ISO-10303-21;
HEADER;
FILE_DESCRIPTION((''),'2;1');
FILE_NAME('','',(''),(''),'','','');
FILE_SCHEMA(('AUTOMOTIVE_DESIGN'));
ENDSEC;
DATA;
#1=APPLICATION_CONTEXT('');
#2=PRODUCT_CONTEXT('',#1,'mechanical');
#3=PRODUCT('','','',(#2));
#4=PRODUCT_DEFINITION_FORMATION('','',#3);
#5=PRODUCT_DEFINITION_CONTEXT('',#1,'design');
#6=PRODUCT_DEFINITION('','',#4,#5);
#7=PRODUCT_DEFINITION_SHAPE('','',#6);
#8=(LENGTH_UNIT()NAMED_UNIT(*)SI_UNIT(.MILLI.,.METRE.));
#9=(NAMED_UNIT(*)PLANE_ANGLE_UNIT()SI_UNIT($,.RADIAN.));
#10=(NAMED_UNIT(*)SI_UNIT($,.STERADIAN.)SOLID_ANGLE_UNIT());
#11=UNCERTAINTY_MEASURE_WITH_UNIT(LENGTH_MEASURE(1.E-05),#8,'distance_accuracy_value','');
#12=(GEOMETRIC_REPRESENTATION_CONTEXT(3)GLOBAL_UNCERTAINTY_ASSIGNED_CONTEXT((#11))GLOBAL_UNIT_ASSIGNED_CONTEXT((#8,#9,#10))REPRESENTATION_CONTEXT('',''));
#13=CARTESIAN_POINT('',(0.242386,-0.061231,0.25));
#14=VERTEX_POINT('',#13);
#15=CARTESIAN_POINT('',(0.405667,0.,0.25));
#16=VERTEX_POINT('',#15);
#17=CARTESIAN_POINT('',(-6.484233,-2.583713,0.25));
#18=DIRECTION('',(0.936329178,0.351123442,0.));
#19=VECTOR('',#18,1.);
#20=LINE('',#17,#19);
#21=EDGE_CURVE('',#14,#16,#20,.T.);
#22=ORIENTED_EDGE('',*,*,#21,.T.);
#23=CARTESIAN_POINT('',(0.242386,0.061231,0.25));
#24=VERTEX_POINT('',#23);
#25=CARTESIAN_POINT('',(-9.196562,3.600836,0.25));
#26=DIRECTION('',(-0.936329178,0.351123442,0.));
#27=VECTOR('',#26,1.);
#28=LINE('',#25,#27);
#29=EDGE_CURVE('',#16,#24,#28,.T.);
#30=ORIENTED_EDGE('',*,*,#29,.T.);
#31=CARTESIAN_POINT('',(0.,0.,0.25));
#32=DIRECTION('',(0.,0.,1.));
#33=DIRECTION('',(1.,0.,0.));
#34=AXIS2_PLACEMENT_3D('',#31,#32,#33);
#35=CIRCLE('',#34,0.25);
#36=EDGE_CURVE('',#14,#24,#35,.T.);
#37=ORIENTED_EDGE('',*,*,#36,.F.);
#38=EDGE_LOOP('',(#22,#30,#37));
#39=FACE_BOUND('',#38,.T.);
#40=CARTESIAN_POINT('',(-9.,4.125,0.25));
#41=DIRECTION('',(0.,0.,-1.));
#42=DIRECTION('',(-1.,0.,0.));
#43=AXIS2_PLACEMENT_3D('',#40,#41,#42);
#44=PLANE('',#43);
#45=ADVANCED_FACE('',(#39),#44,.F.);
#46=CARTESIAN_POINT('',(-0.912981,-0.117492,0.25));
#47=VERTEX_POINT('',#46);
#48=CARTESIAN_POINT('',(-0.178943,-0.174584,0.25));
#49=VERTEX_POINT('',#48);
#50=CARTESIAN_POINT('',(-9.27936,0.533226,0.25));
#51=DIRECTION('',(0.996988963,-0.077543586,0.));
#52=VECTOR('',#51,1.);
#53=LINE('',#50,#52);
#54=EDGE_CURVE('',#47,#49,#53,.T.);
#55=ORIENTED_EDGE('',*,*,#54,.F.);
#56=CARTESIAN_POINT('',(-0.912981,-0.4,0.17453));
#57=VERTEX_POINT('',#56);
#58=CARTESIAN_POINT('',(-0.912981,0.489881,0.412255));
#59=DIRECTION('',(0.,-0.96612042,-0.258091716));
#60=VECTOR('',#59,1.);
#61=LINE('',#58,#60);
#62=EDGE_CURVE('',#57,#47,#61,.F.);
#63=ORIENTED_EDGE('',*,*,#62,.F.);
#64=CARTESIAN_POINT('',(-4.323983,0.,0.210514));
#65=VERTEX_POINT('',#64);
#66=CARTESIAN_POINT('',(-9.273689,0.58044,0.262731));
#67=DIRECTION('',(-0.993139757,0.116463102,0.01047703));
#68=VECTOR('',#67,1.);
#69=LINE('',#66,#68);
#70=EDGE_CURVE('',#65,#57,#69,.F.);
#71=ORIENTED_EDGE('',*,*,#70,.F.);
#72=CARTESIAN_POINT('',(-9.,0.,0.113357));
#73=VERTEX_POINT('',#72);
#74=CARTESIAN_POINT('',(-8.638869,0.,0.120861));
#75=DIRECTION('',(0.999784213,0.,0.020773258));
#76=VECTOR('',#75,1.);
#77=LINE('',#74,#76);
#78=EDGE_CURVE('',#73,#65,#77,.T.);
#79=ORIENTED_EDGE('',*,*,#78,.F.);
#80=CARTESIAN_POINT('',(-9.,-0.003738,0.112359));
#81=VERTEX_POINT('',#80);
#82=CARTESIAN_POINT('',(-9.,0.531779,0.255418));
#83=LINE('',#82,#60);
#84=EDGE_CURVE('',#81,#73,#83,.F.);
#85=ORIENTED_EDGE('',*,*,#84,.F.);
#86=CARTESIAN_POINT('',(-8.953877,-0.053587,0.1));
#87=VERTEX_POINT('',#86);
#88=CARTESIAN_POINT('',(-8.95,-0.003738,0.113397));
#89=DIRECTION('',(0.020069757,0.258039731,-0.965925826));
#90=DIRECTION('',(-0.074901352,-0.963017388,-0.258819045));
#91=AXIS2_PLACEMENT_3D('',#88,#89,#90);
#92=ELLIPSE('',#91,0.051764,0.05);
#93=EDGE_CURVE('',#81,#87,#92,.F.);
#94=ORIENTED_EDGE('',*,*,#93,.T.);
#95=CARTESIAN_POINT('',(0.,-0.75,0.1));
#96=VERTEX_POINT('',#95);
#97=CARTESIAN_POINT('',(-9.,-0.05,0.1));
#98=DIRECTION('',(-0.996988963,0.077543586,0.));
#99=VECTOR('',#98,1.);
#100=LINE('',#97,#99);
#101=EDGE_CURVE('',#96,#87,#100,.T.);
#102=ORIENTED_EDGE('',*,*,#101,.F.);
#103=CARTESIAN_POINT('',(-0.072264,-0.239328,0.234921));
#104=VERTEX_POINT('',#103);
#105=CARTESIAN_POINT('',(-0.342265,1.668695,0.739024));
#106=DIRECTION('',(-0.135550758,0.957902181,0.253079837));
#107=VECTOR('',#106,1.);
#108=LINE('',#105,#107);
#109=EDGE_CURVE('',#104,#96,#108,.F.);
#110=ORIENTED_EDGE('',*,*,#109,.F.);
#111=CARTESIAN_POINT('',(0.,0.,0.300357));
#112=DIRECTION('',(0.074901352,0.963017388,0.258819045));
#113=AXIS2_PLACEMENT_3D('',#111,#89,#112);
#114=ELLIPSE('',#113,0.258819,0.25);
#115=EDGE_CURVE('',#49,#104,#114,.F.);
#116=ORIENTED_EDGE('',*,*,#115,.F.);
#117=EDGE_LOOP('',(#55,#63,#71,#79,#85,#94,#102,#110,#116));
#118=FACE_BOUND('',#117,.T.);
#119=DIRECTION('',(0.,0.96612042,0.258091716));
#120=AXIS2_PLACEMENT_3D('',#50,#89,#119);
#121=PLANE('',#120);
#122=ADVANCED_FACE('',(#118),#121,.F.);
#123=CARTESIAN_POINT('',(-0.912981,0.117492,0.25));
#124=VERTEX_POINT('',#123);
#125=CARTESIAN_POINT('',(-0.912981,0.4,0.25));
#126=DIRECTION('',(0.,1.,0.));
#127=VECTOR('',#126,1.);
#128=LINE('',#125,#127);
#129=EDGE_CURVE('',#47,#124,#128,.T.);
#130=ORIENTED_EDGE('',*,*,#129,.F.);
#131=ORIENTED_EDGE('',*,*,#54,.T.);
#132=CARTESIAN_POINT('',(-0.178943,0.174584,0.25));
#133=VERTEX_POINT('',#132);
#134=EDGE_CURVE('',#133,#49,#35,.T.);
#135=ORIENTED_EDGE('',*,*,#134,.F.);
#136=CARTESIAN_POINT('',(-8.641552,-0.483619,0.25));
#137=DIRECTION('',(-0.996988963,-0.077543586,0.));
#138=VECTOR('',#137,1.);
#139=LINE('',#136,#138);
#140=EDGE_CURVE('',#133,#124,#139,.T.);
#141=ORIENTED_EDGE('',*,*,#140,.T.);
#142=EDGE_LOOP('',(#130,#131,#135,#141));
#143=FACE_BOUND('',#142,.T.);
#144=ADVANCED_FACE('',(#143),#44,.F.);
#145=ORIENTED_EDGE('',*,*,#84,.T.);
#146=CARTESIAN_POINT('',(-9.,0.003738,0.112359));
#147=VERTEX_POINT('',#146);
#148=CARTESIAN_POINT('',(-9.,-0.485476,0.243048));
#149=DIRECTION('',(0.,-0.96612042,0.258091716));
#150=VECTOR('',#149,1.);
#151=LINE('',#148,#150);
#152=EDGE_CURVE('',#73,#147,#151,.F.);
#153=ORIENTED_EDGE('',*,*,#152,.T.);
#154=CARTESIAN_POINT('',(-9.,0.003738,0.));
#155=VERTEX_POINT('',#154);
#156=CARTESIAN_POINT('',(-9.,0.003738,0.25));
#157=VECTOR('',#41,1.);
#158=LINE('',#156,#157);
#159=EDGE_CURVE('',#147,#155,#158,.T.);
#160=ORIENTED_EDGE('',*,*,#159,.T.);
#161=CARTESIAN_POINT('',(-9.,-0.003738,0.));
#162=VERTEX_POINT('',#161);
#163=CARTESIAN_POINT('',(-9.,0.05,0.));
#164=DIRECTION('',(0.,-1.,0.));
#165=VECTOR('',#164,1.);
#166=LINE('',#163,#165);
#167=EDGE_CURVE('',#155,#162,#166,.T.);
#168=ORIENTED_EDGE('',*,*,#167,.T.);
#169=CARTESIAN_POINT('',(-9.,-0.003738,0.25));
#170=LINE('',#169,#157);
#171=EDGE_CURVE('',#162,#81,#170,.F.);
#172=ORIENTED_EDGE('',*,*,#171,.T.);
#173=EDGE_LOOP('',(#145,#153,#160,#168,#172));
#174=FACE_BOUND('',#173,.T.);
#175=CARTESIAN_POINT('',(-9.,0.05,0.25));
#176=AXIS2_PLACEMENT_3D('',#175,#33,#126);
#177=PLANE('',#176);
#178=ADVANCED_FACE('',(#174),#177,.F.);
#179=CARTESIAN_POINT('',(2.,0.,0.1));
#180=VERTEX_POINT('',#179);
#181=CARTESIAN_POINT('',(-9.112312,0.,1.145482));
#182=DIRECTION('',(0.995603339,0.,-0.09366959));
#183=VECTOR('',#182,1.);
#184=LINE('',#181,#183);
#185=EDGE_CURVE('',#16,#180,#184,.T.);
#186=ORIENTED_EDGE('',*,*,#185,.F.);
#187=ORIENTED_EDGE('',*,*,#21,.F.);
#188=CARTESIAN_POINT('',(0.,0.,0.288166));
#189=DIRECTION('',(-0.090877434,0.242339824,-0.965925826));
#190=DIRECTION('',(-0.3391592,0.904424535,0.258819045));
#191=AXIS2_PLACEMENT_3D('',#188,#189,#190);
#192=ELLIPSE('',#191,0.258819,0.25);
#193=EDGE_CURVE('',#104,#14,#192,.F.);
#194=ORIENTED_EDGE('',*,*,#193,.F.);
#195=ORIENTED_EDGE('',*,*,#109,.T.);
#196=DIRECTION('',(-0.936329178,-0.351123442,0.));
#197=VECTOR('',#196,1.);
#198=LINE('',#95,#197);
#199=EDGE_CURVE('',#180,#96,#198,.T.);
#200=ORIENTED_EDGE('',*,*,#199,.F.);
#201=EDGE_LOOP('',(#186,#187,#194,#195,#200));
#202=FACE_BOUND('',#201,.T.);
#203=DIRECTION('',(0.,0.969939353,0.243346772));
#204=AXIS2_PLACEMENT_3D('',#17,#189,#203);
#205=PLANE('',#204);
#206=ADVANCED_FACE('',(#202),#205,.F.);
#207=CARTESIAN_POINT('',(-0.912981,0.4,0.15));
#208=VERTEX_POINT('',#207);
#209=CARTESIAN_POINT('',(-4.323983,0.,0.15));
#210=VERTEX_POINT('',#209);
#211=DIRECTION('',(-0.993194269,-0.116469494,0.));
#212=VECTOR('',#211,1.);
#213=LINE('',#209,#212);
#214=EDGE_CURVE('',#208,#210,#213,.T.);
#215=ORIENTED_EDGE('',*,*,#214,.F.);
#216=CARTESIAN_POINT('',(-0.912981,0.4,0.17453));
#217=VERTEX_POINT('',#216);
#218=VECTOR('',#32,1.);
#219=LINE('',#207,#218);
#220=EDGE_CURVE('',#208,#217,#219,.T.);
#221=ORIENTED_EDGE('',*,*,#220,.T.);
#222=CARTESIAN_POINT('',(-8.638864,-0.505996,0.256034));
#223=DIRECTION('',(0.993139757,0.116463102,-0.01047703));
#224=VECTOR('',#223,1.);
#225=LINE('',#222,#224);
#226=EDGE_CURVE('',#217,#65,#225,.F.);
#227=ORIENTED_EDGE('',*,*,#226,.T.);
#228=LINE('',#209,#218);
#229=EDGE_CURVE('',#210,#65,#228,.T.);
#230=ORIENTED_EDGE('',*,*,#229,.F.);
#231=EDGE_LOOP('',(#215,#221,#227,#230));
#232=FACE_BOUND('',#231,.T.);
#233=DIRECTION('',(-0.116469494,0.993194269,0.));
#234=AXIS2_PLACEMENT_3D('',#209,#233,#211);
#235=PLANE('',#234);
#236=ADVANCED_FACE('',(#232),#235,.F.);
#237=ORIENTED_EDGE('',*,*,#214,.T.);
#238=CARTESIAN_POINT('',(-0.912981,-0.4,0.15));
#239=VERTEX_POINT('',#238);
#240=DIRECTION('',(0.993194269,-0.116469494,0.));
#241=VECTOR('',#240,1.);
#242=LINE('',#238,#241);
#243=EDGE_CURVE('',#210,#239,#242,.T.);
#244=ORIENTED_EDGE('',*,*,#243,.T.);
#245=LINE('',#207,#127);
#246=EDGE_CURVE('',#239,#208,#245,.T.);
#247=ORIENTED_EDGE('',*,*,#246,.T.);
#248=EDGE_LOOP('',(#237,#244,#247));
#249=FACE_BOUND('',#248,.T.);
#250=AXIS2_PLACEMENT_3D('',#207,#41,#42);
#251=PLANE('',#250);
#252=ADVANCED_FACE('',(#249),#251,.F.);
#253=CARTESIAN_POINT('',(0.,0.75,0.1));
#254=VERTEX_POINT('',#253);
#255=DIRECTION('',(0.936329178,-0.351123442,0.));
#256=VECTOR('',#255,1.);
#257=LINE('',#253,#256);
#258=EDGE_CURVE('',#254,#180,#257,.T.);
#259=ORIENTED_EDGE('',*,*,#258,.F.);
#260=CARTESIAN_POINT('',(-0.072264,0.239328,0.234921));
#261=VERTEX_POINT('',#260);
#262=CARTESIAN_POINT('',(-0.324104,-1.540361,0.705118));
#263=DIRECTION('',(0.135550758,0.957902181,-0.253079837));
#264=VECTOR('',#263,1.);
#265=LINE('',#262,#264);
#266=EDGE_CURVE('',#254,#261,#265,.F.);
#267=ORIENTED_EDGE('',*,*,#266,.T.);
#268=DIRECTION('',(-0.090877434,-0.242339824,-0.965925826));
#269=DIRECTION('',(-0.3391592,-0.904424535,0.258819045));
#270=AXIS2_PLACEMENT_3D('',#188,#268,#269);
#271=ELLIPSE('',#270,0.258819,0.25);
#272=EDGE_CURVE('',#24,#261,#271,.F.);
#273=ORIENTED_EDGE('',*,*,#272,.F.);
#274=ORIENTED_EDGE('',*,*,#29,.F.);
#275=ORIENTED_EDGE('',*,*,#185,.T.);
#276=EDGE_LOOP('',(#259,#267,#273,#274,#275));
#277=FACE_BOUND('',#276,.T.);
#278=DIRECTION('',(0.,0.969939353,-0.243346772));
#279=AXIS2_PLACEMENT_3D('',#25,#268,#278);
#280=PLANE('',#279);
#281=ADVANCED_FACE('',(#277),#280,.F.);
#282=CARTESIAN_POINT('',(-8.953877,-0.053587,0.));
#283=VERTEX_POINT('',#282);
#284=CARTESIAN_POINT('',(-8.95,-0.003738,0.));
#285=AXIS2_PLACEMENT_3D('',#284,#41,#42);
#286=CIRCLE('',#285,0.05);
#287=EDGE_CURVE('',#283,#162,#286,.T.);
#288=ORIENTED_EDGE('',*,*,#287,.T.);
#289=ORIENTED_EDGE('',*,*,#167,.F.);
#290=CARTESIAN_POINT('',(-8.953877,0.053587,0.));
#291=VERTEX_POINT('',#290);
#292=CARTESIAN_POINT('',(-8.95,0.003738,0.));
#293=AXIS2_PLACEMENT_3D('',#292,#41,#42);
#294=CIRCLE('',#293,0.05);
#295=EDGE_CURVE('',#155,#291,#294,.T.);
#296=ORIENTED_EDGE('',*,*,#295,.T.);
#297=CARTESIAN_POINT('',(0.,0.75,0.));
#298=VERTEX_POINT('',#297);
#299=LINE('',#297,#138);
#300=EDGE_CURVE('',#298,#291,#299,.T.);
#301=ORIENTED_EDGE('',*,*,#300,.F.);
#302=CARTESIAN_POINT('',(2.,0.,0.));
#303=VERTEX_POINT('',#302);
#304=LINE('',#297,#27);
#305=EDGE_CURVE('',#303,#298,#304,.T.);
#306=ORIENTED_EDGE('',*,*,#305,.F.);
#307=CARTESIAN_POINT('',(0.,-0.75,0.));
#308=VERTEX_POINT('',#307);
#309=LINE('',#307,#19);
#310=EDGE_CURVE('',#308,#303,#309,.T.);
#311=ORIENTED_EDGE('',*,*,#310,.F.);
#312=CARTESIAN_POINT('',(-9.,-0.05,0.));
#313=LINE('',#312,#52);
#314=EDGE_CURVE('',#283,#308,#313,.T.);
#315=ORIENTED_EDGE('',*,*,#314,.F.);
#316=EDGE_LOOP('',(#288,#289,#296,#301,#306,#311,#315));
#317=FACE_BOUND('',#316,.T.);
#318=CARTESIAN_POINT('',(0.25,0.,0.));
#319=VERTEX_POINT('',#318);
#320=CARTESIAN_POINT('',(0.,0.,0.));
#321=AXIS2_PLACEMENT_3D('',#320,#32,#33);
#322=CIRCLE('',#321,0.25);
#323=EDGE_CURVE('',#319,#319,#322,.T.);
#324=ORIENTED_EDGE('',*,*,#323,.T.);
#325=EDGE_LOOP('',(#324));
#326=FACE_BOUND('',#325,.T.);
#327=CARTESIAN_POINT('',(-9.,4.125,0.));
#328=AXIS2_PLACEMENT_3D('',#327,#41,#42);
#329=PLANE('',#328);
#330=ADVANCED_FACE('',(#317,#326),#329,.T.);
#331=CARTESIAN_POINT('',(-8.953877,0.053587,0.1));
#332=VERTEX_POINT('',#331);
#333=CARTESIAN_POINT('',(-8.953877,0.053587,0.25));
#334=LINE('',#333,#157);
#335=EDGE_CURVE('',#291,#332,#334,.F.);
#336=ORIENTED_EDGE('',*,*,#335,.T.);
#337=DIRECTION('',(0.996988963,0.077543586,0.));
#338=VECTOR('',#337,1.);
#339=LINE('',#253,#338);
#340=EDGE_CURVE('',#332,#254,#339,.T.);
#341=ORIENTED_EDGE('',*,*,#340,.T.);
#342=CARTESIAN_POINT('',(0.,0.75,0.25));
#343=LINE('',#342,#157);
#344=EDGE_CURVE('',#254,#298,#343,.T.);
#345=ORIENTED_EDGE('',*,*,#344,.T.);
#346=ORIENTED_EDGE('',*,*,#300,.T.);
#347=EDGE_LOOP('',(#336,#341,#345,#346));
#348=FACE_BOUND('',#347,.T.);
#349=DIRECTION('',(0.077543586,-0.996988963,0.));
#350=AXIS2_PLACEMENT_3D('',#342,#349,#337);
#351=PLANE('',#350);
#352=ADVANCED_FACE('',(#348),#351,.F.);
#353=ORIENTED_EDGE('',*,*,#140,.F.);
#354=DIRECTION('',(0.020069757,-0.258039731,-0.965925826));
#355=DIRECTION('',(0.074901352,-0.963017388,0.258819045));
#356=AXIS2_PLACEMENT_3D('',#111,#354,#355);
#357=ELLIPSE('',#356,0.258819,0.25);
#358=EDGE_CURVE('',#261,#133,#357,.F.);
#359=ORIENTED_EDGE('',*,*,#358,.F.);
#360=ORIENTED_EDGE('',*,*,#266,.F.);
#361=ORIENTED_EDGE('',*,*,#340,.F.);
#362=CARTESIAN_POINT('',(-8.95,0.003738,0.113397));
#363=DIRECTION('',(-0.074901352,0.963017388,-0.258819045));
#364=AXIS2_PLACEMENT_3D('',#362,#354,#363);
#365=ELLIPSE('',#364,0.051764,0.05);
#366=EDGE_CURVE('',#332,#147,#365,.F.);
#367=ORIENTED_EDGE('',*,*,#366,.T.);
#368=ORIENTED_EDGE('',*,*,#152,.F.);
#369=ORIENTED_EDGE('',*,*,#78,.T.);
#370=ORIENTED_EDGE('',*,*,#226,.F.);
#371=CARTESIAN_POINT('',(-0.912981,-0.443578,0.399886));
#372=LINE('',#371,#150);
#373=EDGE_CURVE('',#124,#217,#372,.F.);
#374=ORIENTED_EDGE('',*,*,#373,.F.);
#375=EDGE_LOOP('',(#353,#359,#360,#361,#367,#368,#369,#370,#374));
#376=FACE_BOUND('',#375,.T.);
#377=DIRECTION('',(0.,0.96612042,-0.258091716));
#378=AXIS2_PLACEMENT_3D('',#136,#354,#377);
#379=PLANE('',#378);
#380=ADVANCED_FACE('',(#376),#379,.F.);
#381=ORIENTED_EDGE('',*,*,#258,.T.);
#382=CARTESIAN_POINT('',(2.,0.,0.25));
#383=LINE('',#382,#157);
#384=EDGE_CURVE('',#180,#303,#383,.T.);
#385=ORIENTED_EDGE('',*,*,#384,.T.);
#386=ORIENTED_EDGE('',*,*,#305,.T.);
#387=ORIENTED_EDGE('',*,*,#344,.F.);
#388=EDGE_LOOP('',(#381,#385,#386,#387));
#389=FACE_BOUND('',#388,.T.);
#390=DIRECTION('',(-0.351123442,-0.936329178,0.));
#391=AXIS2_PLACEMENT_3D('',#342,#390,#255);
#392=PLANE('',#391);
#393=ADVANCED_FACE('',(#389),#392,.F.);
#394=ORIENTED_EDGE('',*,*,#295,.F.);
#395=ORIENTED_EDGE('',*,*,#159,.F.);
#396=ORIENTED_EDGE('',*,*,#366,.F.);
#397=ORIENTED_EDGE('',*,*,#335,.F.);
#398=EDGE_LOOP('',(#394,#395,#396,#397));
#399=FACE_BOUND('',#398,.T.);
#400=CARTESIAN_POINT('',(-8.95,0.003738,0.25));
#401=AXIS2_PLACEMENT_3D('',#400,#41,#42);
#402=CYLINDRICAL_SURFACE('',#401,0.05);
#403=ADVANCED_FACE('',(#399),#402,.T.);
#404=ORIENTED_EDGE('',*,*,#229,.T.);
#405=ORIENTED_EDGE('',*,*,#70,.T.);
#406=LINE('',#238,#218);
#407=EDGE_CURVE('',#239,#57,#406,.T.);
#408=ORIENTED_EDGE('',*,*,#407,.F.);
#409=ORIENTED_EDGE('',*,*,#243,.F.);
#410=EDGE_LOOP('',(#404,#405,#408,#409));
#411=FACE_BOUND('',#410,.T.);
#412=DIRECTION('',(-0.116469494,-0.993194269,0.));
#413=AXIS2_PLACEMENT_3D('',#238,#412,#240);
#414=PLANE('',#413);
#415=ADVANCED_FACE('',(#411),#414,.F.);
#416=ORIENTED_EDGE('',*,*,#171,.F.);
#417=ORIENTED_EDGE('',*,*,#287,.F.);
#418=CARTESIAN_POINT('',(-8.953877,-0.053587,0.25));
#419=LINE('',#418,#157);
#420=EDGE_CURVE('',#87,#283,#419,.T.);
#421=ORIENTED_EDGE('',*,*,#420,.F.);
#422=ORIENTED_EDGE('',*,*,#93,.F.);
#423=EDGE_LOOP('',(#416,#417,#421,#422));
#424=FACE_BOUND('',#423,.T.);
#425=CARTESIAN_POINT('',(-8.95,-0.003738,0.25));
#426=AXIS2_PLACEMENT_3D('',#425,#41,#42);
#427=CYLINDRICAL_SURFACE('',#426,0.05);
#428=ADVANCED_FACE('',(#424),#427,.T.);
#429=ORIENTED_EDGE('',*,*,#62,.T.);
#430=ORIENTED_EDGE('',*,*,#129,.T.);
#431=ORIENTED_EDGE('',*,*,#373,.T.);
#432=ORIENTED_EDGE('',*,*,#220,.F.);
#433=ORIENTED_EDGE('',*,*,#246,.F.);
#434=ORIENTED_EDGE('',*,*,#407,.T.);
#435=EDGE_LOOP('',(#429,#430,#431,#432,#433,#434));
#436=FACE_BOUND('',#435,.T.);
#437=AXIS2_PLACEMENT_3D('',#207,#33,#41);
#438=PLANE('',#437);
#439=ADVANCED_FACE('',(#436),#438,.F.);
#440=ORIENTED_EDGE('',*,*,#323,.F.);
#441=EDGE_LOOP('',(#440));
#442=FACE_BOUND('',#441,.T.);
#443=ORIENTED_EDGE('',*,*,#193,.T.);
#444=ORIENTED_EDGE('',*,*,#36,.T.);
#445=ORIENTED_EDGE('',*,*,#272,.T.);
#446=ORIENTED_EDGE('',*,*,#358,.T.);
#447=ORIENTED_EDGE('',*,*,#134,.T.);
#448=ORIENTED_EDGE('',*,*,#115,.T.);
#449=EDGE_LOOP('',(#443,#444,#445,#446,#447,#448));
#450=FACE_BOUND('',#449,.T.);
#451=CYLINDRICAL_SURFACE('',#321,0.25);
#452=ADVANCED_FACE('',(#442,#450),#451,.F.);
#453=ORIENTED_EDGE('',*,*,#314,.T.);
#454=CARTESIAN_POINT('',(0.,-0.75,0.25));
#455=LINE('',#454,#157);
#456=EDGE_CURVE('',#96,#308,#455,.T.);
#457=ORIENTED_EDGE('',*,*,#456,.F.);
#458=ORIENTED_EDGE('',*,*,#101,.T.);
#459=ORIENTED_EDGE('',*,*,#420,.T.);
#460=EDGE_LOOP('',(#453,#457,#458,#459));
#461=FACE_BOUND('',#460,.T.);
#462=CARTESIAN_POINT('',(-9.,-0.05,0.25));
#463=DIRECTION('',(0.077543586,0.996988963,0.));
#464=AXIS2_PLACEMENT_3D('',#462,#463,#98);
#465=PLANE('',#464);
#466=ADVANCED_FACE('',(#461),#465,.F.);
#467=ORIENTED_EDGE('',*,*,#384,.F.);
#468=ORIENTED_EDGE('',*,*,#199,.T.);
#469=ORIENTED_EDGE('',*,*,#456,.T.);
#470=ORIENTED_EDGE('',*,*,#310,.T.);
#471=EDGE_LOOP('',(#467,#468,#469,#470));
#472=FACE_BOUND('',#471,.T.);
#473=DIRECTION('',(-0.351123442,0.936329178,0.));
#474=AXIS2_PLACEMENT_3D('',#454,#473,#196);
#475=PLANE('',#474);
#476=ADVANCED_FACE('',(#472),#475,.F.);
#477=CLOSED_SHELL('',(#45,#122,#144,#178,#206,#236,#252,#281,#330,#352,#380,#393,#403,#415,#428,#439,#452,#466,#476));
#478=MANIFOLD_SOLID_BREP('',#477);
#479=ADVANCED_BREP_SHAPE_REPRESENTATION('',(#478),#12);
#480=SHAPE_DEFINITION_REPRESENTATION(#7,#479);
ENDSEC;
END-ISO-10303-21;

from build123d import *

# Parameters (mm, degrees)
BOSS_EXTRUDE1_DEPTH = 0.25
SKETCH2_R           = 0.25
CUT_EXTRUDE1_DEPTH  = 0.25
CHAMFER1_SIZE       = 0.15
CHAMFER1_SIZE_2     = 0.559807621
FILLET1_R           = 0.05
CUT_EXTRUDE2_DEPTH  = 0.1


with BuildPart() as part:
    # Sketch1 → Boss-Extrude1 (new body)
    with BuildSketch(Plane.XY):
        Polygon((0, 0.75), (-9, 0.05), (-9, -0.05), (0, -0.75), (2, 0), align=None)
    extrude(amount=BOSS_EXTRUDE1_DEPTH)

    # Sketch2 → Cut-Extrude1 (cut)
    with BuildSketch(Plane.XY.offset(0.25)):
        Circle(SKETCH2_R)
    extrude(amount=-CUT_EXTRUDE1_DEPTH, mode=Mode.SUBTRACT)

    # Chamfer1
    # the kernel refuses this chamfer: 0.559807621, 0.15 mm, written as the material it takes off along each edge
    with BuildSketch(Plane(origin=(3.361108509, -0.510415691, 0.25), x_dir=(0.04828384365935674, 0.12875691642495132, -0.9905000388259542), z_dir=(-0.9363291775690445, 0.3511234415883917, 0))) as chamfer1_piece_1:
        Polygon((CHAMFER1_SIZE * 0.990500038826, CHAMFER1_SIZE * 0.137512447021), (-CHAMFER1_SIZE_2 * 0.137512447055, CHAMFER1_SIZE_2 * 0.990500039065), (0, 0), align=None)
    extrude(amount=5.043329986, mode=Mode.SUBTRACT)
    with BuildSketch(Plane(origin=(1.449287487, 0.86272236, 0.25), x_dir=(-0.010663208262792517, 0.13709839195018952, -0.990500038825954), z_dir=(-0.9969889629624744, -0.07754358600819244, 0))) as chamfer1_piece_2:
        Polygon((CHAMFER1_SIZE * 0.990500038826, CHAMFER1_SIZE * 0.137512447021), (-CHAMFER1_SIZE_2 * 0.137512447055, CHAMFER1_SIZE_2 * 0.990500039065), (0, 0), align=None)
    extrude(amount=11.934510227, mode=Mode.SUBTRACT)

    # Chamfer2
    # the kernel refuses this chamfer: 0.559807621, 0.15 mm, written as the material it takes off along each edge
    with BuildSketch(Plane(origin=(-3.266660422, -1.974997658, 0.25), x_dir=(0.04828384365935697, -0.12875691642495193, -0.9905000388259542), z_dir=(0.9363291775690445, 0.3511234415883917, 0))) as chamfer2_piece_1:
        with BuildLine():
            Line((0.157289802, 0), (-0.085695312, 0.575116338))
            Line((-0.085695312, 0.575116338), (-0.096785101, 0.573576727))
            ThreePointArc((-0.096785101, 0.573576727), (-0.051067197, 0.286417039), (-0.011089789, -0.00153961))
            Line((-0.011089789, -0.00153961), (0.00153961, -0.011089789))
            ThreePointArc((0.00153961, -0.011089789), (0.078697362, -0.000377875), (0.158829412, -0.011089789))
            Line((0.158829412, -0.011089789), (0.157289802, 0))
        make_face()
    extrude(amount=8.262216566, mode=Mode.SUBTRACT)
    with BuildSketch(Plane(origin=(-9.511515098, -0.010215492, 0.25), x_dir=(-0.010663208262792486, -0.13709839195018902, -0.9905000388259542), z_dir=(0.9969889629624744, -0.0775435860081925, 0))) as chamfer2_piece_2:
        with BuildLine():
            Line((0.157289802, 0), (-0.085695312, 0.575116338))
            Line((-0.085695312, 0.575116338), (-0.096785101, 0.573576727))
            ThreePointArc((-0.096785101, 0.573576727), (-0.051067197, 0.286417039), (-0.011089789, -0.00153961))
            Line((-0.011089789, -0.00153961), (0.00153961, -0.011089789))
            ThreePointArc((0.00153961, -0.011089789), (0.078697362, -0.000377875), (0.158829412, -0.011089789))
            Line((0.158829412, -0.011089789), (0.157289802, 0))
        make_face()
    extrude(amount=13.029035977, mode=Mode.SUBTRACT)

    # Fillet1
    fillet1_edges = [part.edges().sort_by_distance(p)[0] for p in [
        (-9, 0.05, 0.05),
        (-9, -0.05, 0.05),
    ]]
    fillet(fillet1_edges, radius=FILLET1_R)

    # Sketch3 → Cut-Extrude2 (cut)
    with BuildSketch(Plane.XY.offset(0.25)):
        Polygon((-0.912980909, 0.4), (-0.912980909, -0.4), (-4.323983168, 0), align=None)
    extrude(amount=-CUT_EXTRUDE2_DEPTH, mode=Mode.SUBTRACT)


solid = part.part
